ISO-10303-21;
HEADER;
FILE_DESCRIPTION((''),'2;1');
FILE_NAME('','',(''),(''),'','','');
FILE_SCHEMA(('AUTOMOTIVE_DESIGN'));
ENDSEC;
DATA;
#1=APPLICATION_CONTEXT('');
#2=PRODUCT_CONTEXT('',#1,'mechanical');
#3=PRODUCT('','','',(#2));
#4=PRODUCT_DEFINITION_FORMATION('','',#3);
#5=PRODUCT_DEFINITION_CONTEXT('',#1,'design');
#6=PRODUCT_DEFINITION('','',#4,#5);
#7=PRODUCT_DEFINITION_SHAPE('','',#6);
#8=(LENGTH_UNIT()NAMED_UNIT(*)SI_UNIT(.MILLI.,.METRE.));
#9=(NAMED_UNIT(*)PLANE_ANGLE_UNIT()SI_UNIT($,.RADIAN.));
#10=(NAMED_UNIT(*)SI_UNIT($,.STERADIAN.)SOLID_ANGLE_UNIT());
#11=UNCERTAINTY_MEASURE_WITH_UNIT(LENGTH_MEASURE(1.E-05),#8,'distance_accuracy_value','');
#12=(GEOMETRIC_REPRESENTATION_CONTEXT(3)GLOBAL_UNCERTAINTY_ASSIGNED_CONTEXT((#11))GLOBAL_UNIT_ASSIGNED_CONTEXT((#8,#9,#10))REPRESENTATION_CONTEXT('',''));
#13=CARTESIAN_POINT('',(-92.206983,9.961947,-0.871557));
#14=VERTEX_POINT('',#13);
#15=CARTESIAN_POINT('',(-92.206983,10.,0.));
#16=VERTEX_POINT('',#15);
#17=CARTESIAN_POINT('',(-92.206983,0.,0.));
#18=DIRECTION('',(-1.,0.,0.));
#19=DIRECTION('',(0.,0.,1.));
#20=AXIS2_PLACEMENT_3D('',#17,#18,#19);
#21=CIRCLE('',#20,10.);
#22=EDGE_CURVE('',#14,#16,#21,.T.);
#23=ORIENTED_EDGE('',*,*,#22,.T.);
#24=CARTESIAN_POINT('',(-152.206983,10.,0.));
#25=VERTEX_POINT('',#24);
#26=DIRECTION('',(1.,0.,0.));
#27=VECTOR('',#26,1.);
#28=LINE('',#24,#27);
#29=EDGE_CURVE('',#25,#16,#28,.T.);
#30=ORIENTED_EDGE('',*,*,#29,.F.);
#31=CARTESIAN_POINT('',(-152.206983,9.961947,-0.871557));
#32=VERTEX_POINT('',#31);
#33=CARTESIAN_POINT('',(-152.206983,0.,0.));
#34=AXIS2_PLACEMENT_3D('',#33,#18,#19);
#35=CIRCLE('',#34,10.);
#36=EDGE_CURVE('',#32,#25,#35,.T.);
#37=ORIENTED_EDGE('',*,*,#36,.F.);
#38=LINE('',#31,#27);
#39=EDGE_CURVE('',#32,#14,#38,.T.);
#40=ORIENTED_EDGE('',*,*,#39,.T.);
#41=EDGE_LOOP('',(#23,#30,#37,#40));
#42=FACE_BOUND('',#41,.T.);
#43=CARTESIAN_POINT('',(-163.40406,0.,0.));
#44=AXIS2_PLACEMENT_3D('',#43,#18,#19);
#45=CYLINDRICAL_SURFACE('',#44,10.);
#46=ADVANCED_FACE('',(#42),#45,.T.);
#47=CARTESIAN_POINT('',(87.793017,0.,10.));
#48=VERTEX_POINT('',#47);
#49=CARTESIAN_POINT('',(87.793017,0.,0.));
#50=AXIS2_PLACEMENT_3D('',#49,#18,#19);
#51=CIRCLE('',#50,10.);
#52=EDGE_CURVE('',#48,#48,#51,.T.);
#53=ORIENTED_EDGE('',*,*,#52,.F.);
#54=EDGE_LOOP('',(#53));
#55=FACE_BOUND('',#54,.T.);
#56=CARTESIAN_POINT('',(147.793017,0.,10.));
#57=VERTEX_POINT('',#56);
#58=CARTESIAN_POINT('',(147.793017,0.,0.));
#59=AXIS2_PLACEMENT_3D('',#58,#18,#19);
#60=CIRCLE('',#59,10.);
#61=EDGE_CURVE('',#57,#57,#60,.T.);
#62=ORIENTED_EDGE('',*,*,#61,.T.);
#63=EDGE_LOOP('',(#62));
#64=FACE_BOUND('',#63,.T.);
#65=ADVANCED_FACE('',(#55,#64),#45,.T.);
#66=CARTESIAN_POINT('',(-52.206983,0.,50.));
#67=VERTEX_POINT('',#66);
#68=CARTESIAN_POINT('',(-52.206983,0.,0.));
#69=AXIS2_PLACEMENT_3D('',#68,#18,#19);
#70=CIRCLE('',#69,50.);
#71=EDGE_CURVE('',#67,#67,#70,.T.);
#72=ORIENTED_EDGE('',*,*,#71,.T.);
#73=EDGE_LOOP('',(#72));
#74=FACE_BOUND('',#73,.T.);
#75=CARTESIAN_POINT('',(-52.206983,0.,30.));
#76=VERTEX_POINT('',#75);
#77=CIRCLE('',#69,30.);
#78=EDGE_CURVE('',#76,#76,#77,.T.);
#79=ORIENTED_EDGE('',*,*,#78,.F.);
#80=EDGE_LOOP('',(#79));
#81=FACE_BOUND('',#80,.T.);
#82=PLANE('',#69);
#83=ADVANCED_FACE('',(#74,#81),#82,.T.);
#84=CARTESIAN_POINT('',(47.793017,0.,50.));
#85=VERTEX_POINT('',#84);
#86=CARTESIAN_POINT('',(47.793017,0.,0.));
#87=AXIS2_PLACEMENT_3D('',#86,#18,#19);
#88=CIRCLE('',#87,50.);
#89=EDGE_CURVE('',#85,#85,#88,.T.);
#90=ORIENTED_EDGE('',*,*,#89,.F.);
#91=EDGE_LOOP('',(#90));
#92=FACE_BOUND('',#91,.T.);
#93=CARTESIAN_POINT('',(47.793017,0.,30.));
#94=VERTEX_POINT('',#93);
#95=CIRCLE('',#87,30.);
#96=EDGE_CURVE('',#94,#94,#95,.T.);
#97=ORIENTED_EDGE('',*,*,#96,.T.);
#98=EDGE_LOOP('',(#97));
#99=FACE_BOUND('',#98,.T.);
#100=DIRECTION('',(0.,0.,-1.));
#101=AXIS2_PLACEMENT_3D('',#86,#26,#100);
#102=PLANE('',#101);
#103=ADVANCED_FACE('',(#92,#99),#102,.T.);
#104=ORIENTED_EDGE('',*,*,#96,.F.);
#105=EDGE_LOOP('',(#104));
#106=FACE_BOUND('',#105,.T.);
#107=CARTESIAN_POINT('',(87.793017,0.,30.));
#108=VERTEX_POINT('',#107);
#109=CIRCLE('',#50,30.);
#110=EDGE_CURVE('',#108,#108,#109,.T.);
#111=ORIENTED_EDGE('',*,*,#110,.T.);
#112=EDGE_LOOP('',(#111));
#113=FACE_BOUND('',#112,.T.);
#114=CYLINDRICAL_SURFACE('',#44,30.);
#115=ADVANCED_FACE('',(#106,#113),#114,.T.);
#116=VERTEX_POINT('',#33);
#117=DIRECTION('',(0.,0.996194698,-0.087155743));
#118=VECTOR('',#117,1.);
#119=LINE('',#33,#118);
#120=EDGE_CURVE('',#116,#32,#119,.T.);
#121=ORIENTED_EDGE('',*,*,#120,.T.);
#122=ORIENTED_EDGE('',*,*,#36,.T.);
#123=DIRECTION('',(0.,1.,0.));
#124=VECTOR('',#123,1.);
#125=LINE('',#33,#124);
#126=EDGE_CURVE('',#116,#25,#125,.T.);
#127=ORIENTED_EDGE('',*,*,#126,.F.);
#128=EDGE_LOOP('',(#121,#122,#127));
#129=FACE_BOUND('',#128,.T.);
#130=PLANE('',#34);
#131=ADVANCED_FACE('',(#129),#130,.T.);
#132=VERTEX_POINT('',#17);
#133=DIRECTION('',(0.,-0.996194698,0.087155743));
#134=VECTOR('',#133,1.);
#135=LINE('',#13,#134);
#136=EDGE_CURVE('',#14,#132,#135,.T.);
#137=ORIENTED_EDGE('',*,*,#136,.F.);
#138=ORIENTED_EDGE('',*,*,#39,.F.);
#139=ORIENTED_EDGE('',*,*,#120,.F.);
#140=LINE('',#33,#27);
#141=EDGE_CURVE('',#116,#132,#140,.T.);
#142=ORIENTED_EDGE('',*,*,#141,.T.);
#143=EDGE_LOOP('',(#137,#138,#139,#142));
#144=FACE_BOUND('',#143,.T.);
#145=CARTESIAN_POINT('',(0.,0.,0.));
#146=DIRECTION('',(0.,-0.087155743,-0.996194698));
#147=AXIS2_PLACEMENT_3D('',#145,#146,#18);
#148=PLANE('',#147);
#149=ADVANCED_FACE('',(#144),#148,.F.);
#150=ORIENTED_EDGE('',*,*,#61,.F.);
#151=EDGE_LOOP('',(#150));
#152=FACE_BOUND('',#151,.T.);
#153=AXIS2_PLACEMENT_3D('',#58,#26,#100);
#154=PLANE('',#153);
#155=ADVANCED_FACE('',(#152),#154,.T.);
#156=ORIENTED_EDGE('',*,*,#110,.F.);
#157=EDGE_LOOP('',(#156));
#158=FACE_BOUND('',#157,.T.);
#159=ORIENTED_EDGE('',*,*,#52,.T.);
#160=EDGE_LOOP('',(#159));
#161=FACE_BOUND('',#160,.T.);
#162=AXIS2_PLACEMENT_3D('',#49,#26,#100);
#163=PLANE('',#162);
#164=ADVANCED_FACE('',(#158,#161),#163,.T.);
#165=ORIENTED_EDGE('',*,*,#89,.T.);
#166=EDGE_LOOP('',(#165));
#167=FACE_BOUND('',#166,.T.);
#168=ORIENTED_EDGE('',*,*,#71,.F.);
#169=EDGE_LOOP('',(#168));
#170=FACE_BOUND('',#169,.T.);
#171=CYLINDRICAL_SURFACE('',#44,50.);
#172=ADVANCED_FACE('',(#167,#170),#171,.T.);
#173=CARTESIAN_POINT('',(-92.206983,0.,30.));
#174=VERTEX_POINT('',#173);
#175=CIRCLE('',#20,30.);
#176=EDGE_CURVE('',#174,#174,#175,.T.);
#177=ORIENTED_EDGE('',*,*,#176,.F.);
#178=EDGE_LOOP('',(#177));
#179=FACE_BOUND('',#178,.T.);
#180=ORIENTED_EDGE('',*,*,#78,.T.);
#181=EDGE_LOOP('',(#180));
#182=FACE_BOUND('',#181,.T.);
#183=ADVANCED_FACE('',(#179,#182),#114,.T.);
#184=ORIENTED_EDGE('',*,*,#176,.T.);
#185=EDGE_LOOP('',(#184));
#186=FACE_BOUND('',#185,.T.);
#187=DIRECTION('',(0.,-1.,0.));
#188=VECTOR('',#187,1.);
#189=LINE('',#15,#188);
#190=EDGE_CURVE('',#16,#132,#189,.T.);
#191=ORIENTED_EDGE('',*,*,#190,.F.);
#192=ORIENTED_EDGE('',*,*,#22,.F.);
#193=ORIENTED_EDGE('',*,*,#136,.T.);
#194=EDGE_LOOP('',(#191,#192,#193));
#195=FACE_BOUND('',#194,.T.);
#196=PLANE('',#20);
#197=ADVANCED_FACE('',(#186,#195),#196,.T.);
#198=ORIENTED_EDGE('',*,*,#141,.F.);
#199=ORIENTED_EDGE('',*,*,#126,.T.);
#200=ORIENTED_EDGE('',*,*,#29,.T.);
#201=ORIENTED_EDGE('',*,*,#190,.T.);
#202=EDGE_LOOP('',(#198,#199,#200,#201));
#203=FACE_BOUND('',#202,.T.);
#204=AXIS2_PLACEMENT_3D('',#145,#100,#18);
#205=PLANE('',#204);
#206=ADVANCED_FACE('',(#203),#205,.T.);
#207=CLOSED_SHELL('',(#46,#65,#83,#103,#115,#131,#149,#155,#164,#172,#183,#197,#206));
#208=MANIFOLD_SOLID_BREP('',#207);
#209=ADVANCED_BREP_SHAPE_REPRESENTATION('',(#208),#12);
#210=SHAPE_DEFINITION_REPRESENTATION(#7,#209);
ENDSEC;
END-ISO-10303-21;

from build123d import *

# Parameters (mm, degrees)
REVOLVE_THIN4_START = -152.206983034
REVOLVE_THIN4_DEPTH = 60
SKETCH1_7_W         = 60
SKETCH1_7_H         = 10


# Read off the part's stored shape, not the designer's step: Revolve-Thin4
with BuildPart() as part:
    # Revolve-Thin4 outline → Revolve-Thin4 (new body)
    with BuildSketch(Plane.YZ.offset(REVOLVE_THIN4_START)):
        with BuildLine():
            ThreePointArc((10, 0), (-9.990482216, 0.436193872), (9.961946981, -0.871557427))
            Line((9.961946981, -0.871557427), (0, 0))
            Line((0, 0), (10, 0))
        make_face()
    extrude(amount=REVOLVE_THIN4_DEPTH)

    # Sketch1<7> → Revolve2 (revolve)
    with BuildSketch(Plane.XY, mode=Mode.PRIVATE) as revolve2_sk:
        Polygon((-92.206983034, 10), (-92.206983034, 0), (-52.206983034, 0), (-52.206983034, 30), (-92.206983034, 30), align=None)
        Polygon((-52.206983034, 30), (-52.206983034, 0), (47.793016966, 0), (47.793016966, 30), (47.793016966, 50), (-52.206983034, 50), align=None)
        Polygon((47.793016966, 30), (47.793016966, 0), (87.793016966, 0), (87.793016966, 10), (87.793016966, 30), align=None)
        with Locations((117.793016966, 5)):
            Rectangle(SKETCH1_7_W, SKETCH1_7_H)
    revolve(revolve2_sk.sketch.rotate(Axis((-163.404059647, 0, 0), (1, 0, 0)), 90), axis=Axis((-163.404059647, 0, 0), (1, 0, 0)))


solid = part.part
